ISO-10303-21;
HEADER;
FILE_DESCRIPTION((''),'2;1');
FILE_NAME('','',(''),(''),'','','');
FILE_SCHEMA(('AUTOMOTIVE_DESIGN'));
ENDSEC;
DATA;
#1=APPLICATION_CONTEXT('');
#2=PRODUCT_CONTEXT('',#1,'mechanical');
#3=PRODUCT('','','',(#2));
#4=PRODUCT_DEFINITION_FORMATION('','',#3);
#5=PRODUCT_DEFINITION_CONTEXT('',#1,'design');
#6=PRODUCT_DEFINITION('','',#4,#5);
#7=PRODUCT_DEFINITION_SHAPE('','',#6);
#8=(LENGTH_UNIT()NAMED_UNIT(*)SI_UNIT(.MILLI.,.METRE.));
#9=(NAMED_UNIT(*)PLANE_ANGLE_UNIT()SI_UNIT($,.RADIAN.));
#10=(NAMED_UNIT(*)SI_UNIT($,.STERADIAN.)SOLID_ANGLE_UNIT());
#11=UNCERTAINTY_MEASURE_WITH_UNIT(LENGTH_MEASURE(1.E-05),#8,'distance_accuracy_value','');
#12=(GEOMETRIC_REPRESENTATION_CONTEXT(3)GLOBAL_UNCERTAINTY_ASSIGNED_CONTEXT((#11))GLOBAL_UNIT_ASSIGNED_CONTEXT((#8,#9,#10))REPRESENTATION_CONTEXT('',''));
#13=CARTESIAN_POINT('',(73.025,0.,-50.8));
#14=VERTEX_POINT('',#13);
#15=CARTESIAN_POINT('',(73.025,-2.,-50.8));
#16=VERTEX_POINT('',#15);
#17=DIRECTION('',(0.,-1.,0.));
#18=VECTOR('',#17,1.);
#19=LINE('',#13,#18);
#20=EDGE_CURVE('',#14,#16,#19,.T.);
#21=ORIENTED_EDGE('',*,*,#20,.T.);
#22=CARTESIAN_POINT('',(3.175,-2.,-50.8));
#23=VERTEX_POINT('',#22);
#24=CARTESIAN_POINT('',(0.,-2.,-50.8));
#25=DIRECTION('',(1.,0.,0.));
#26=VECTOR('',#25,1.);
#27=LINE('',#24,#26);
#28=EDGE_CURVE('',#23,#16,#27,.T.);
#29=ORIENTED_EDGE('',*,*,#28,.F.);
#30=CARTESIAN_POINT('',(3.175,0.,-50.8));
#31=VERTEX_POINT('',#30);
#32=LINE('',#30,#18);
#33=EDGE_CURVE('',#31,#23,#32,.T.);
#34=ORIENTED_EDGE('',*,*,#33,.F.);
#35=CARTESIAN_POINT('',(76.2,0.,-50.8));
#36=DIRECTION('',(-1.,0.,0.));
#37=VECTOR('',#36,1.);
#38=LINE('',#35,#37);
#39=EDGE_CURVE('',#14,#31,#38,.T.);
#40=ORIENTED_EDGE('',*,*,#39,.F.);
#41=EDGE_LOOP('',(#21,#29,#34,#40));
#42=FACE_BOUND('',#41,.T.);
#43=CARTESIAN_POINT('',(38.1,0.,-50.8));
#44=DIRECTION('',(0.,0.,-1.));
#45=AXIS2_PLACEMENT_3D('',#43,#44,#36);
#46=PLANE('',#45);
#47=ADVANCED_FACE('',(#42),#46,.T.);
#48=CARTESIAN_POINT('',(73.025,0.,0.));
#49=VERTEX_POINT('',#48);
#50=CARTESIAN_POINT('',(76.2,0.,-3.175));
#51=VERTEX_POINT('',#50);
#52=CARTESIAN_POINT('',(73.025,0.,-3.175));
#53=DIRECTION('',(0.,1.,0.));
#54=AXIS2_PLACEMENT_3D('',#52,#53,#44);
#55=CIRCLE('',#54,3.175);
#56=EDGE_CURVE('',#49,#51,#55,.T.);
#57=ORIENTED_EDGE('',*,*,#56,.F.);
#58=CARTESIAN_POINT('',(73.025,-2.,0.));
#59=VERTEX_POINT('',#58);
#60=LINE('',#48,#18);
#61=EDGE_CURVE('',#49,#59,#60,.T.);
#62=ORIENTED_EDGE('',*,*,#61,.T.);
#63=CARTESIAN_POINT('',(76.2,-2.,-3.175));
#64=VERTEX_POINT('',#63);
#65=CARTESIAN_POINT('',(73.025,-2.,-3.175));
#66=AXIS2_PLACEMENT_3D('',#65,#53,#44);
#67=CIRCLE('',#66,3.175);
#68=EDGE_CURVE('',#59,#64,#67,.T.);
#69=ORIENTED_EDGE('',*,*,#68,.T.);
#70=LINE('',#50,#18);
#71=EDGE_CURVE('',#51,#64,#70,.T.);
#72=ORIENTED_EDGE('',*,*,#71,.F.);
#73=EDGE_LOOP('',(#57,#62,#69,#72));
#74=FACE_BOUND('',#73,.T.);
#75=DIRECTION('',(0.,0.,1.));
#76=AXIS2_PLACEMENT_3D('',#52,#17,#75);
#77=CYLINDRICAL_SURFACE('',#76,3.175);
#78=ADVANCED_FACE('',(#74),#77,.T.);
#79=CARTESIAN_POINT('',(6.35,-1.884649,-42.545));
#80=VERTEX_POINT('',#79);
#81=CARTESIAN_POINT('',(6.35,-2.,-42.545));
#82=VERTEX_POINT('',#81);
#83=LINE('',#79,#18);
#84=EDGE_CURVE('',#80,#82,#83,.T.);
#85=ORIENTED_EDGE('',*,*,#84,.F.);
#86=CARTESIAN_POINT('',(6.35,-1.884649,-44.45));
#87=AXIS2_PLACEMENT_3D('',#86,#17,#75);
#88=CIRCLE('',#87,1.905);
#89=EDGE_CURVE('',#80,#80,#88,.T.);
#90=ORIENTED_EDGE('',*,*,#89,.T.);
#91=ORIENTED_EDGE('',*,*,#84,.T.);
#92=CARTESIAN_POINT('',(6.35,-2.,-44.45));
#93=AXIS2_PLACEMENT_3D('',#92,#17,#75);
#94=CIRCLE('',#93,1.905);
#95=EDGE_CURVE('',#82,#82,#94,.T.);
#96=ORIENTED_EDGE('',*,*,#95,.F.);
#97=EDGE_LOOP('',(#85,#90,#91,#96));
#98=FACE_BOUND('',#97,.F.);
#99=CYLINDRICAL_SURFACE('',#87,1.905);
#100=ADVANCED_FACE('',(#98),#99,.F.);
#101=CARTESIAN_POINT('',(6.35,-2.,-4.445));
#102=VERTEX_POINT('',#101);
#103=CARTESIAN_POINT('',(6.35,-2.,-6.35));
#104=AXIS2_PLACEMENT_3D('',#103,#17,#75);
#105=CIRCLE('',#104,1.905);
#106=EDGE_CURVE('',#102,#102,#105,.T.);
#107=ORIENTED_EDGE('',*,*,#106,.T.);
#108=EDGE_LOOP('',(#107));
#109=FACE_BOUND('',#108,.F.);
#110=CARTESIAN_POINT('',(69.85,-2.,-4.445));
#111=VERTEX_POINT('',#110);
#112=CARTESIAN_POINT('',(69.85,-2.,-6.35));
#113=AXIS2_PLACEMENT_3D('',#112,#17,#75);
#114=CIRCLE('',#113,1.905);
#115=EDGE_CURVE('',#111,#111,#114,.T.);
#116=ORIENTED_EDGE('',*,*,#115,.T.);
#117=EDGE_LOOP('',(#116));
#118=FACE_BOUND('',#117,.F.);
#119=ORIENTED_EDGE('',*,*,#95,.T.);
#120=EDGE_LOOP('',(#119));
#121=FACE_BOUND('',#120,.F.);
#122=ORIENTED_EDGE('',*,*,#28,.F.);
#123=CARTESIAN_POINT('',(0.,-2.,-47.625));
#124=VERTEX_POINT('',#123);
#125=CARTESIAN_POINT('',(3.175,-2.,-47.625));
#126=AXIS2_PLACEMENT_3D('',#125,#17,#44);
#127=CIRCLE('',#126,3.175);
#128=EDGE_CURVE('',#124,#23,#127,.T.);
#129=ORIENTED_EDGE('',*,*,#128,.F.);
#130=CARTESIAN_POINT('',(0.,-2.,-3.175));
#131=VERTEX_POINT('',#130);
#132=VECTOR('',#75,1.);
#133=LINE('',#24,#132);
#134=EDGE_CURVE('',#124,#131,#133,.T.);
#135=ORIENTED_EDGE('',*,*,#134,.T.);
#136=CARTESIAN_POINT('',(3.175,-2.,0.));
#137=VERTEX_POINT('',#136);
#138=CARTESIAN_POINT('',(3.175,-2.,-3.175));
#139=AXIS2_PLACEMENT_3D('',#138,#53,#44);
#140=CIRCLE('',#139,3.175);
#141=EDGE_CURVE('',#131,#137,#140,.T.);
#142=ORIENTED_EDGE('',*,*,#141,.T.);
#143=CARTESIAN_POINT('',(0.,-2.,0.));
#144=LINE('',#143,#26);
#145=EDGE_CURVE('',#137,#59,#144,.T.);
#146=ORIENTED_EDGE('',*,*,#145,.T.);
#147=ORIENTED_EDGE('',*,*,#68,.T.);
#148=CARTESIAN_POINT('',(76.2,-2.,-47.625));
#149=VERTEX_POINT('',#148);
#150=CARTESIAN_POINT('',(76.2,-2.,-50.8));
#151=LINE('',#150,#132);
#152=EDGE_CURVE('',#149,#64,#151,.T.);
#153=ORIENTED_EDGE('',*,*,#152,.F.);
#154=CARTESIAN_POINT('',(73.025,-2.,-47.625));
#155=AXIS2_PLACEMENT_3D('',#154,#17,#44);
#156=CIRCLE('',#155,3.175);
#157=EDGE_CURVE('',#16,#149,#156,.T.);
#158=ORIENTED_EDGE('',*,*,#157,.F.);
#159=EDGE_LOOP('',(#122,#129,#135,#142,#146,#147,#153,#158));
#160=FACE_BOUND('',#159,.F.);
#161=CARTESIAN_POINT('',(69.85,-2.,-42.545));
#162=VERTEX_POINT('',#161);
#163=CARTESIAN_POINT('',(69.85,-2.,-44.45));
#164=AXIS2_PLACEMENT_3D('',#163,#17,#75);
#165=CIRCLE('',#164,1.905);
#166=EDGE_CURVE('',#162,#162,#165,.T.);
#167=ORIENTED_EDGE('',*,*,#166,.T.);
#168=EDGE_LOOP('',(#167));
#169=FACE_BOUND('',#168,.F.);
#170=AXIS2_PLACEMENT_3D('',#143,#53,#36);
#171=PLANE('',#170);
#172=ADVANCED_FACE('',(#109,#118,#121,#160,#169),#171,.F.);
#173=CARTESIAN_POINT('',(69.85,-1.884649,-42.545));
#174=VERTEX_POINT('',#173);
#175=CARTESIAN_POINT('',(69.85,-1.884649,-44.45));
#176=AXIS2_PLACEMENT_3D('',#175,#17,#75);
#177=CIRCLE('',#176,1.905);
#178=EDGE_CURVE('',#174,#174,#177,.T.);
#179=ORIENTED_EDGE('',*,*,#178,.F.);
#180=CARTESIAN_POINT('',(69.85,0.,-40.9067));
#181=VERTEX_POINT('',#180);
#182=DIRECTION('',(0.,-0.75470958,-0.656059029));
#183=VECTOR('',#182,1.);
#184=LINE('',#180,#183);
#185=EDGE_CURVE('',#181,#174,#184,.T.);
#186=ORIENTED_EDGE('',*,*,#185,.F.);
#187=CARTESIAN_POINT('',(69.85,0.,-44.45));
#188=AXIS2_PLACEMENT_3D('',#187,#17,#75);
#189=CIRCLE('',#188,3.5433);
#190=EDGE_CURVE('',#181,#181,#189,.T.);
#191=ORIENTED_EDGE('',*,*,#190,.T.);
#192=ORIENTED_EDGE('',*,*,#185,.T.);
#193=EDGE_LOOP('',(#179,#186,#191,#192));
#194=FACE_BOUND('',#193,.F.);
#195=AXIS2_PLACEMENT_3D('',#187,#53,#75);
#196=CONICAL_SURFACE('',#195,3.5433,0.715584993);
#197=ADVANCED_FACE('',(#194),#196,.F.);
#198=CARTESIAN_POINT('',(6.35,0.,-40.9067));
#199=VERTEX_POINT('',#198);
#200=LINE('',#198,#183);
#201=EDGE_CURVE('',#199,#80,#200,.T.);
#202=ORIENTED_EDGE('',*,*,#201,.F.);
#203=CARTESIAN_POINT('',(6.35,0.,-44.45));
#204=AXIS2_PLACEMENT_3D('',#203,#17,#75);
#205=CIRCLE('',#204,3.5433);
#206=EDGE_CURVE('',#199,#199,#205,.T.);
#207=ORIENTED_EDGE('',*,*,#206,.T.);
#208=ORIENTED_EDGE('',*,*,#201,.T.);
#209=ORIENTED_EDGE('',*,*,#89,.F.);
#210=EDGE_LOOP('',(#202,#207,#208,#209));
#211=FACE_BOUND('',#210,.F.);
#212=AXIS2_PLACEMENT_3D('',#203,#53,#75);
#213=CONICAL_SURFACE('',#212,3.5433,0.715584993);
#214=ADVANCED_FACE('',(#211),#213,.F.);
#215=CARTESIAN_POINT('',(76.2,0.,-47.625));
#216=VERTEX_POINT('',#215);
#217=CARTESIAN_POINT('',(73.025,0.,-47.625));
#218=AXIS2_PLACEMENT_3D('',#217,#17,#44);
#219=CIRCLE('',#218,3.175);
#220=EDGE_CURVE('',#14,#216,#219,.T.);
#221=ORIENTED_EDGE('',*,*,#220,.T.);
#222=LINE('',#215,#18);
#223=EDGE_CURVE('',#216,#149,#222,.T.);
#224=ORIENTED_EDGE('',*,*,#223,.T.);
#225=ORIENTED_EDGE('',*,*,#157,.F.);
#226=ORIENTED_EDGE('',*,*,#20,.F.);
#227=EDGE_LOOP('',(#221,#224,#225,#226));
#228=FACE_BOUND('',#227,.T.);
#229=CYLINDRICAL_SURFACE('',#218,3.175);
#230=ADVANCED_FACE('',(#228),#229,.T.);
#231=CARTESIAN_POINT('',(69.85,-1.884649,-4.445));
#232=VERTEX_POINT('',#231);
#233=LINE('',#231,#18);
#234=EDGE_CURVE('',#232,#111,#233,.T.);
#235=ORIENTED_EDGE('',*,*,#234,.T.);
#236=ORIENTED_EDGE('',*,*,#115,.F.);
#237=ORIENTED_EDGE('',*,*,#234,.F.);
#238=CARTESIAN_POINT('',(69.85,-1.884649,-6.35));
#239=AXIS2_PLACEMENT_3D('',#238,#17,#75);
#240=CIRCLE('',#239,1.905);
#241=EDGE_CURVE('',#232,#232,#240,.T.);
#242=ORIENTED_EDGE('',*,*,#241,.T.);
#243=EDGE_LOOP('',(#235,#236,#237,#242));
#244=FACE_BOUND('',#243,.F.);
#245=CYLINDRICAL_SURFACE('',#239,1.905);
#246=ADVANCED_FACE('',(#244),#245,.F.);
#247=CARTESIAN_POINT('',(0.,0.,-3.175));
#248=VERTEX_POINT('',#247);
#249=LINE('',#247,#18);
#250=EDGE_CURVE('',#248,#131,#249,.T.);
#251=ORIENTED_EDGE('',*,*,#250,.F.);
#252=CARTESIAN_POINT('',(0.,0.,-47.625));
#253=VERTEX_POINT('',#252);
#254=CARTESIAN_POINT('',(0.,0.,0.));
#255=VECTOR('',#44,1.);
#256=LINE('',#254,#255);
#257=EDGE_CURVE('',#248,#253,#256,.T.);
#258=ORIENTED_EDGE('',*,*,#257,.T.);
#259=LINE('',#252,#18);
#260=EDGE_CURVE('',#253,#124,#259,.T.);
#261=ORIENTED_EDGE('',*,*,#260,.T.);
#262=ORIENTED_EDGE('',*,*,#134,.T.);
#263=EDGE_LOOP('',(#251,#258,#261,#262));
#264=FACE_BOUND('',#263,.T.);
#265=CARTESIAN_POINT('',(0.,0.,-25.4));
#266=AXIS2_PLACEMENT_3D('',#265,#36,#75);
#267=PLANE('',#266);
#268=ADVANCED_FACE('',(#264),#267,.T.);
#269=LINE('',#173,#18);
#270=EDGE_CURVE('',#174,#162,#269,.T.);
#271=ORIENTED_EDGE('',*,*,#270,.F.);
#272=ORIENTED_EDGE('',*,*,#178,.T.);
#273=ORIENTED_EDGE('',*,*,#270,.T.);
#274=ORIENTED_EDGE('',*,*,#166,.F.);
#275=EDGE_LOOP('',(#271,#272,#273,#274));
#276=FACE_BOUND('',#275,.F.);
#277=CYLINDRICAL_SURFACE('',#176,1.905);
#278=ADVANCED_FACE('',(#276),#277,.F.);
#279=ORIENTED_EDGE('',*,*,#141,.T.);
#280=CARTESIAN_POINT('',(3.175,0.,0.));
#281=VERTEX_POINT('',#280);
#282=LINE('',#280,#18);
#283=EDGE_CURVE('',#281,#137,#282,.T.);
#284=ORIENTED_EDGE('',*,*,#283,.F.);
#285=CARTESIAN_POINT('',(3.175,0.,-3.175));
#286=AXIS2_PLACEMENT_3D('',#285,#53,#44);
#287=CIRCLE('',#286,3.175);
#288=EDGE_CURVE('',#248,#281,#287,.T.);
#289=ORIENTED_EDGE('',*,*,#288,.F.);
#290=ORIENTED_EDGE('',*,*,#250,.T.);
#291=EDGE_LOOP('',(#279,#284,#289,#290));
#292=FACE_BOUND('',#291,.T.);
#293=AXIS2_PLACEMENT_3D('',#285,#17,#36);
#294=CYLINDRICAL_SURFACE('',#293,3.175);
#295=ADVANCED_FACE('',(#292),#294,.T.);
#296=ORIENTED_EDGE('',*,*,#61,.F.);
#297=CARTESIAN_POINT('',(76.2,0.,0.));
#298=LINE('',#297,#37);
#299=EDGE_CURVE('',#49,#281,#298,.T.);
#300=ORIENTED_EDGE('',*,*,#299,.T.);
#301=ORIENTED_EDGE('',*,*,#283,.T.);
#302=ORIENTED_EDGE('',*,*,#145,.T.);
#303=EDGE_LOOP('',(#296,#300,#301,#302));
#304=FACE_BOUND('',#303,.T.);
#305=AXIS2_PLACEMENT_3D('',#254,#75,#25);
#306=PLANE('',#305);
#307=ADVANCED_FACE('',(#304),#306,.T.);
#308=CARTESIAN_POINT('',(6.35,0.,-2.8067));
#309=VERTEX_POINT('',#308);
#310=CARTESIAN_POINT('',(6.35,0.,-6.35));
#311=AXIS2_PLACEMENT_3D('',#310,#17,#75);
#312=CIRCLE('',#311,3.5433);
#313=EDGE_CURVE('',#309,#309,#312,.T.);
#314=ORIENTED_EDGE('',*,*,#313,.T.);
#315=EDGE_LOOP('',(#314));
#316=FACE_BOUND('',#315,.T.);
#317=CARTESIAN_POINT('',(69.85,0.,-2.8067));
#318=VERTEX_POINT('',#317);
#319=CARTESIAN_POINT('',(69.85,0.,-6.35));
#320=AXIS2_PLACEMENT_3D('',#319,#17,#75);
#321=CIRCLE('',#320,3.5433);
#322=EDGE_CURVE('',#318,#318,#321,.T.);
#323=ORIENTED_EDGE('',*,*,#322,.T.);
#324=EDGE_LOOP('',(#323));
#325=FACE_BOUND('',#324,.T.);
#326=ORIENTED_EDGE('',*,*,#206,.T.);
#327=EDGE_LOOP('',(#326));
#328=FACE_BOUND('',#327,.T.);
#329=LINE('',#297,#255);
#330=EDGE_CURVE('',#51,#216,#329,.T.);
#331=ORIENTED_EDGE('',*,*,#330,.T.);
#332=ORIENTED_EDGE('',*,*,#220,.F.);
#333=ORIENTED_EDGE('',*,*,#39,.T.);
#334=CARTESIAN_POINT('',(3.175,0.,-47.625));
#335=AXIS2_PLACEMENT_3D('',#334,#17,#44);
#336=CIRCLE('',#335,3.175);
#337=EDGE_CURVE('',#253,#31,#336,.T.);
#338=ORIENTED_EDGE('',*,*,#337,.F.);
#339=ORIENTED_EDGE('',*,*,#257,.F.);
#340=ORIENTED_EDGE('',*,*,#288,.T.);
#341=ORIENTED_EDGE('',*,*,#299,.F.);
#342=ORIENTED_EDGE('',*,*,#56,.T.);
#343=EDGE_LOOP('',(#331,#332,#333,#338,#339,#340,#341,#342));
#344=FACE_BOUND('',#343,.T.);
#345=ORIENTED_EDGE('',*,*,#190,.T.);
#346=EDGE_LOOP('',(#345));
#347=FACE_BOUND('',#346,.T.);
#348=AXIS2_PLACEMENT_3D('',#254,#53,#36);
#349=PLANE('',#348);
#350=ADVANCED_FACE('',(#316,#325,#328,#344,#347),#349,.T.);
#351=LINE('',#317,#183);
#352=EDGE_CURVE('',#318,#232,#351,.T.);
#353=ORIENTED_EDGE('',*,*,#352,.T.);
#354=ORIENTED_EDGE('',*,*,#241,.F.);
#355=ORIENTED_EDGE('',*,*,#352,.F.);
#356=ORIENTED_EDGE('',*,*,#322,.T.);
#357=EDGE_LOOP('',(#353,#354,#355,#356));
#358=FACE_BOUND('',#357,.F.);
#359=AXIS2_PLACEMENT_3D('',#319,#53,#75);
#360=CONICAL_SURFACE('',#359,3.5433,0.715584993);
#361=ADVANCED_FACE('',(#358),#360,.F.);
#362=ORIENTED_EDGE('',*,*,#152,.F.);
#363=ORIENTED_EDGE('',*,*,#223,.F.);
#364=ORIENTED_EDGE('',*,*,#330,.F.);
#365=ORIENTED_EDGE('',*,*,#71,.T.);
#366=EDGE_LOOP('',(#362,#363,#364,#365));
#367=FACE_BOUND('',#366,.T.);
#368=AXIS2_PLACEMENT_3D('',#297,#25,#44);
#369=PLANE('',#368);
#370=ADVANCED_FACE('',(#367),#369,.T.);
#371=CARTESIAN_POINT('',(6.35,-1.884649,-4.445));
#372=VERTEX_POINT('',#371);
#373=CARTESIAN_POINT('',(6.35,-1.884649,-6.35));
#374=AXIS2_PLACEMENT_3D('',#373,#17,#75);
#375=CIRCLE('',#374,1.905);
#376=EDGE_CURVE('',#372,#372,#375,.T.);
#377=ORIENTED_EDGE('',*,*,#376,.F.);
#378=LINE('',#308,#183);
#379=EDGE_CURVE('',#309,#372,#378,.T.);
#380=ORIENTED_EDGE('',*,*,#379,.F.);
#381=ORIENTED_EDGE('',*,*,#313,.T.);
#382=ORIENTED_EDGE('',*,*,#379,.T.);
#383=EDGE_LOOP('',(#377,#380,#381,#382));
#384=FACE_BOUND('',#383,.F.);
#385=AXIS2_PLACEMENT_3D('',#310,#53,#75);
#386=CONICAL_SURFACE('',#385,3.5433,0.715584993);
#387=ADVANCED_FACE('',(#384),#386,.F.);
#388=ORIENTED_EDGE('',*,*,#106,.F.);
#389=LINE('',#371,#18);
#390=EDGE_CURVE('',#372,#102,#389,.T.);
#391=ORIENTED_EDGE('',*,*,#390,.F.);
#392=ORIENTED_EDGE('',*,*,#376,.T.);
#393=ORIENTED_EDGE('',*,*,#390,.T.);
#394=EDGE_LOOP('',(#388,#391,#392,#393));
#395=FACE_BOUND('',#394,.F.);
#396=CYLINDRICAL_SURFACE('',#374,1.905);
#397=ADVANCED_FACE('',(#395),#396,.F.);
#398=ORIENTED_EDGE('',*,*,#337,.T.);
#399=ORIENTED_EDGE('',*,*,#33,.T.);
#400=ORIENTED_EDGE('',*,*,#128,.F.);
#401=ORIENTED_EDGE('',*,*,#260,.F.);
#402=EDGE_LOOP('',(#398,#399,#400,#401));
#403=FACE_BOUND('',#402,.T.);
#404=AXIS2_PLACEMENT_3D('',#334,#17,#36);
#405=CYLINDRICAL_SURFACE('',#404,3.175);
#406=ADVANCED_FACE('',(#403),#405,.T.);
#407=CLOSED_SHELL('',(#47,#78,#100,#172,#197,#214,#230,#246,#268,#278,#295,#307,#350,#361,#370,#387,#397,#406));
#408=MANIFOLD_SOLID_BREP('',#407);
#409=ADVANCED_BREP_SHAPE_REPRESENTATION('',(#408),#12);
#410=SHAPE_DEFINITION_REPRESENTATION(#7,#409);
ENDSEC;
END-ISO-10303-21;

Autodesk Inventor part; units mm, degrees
ref_plane "YZ Plane" through (0, 0, 0) normal (1, 0, 0) x (0, 1, 0)
ref_plane "XZ Plane" through (0, 0, 0) normal (0, 1, 0) x (-1, 0, 0)
ref_plane "XY Plane" through (0, 0, 0) normal (0, 0, 1) x (1, 0, 0)
sketch "Sketch1" plane through (0, 0, 0) normal (0, 1, 0) x (-1, 0, 0)
  line L0 (0, 0) -> (-76.2, 0)
  line L1 (-76.2, 0) -> (-76.2, -50.8)
  line L2 (-76.2, -50.8) -> (0, -50.8)
  line L3 (0, -50.8) -> (0, 0)
  line L4 (0, -25.4) -> (-76.2, -25.4)
  line L5 (-38.1, -50.8) -> (-38.1, 0)
  line L6 (-6.35, -44.45) -> (-69.85, -44.45) construction
  line L7 (-69.85, -44.45) -> (-69.85, -6.35) construction
  line L8 (-69.85, -6.35) -> (-6.35, -6.35) construction
  line L9 (-6.35, -6.35) -> (-6.35, -44.45) construction
  line L10 (-6.35, -44.45) -> (-69.85, -6.35) construction
  line L11 (-69.85, -44.45) -> (-6.35, -6.35) construction
  point P0 (-38.1, -25.4)
  dimension "d0" = 76.2
  dimension "d1" = 50.8
  dimension "d2" = 63.5
  dimension "d3" = 38.1
extrude "Plate1" add sketch "Sketch1" against normal blind 2
hole "Mounting Hole" at (6.35, 0, -44.45) direction (0, -1, 0) diameter 3.81 end through all countersink diameter 7.0866 countersink angle 82 clearance for "Flat Head Machine Screw (82)" size "#6" standard "Ansi Unified Screw Threads"
pattern_sketch "Mounting Holes" of "Mounting Hole" from (6.35, 0, -44.45) copies at (69.85, 0, -44.45) at (69.85, 0, -6.35) at (6.35, 0, -6.35)
fillet "Corner Round1" radius 3.175 4 edges at (0, -1, -50.8) (76.2, -1, -50.8) (76.2, -1, 0) (0, -1, 0)
sketch "Sketch2" plane through (0, 0, 0) normal (0, 1, 0) x (1, 0, 0)
  line L0 (5.9151, 38.1317) -> (36.83, 38.1317) construction
  line L1 (36.83, 38.1317) -> (36.83, 35.0837) construction
  line L2 (36.83, 35.0837) -> (5.9151, 35.0837) construction
  line L3 (5.9151, 35.0837) -> (5.9151, 38.1317) construction
  line L4 (5.9151, 31.2737) -> (36.83, 31.2737) construction
  line L5 (36.83, 31.2737) -> (36.83, 28.2258) construction
  line L6 (36.83, 28.2258) -> (5.9151, 28.2257) construction
  line L7 (5.9151, 28.2257) -> (5.9151, 31.2737) construction
  line L8 (11.7398, 18.288) -> (64.4602, 18.288) construction
  line L9 (64.4602, 18.288) -> (64.4602, 8.128) construction
  line L10 (64.4602, 8.128) -> (11.7398, 8.128) construction
  line L11 (11.7398, 8.128) -> (11.7398, 18.288) construction
  line L12 (21.6232, 5.588) -> (54.5768, 5.588) construction
  line L13 (54.5768, 5.588) -> (54.5768, 2.54) construction
  line L14 (54.5768, 2.54) -> (21.6232, 2.54) construction
  line L15 (21.6232, 2.54) -> (21.6232, 5.588) construction
  line L16 (5.9151, 24.4157) -> (36.83, 24.4157) construction
  line L17 (36.83, 24.4157) -> (36.83, 21.3677) construction
  line L18 (36.83, 21.3677) -> (5.9151, 21.3677) construction
  line L19 (5.9151, 21.3677) -> (5.9151, 24.4157) construction
  circle A0 centre (6.35, 6.35) radius 3.5433 construction
  circle A1 centre (69.85, 6.35) radius 3.5433 construction
  circle A2 centre (69.85, 44.45) radius 3.5433 construction
  circle A3 centre (6.35, 44.45) radius 3.5433 construction
  arc A4 (0, 3.175) -> (3.175, 0) centre (3.175, 3.175) ccw construction
  line L20 (3.175, 0) -> (73.025, 0) construction
  arc A5 (73.025, 0) -> (76.2, 3.175) centre (73.025, 3.175) ccw construction
  line L21 (76.2, 3.175) -> (76.2, 47.625) construction
  arc A6 (76.2, 47.625) -> (73.025, 50.8) centre (73.025, 47.625) ccw construction
  line L22 (73.025, 50.8) -> (3.175, 50.8) construction
  arc A7 (3.175, 50.8) -> (0, 47.625) centre (3.175, 47.625) ccw construction
  line L23 (0, 47.625) -> (0, 3.175) construction
  circle A8 centre (6.35, 44.45) radius 6.35 construction
  line L24 (73.025, 50.8) -> (3.175, 50.8) projected
  line L25 (38.1, 50.8) -> (38.1, 0) construction
  line L26 (0, 25.4) -> (76.2, 25.4) construction
  circle A9 centre (69.85, 44.45) radius 6.35 construction
  circle A10 centre (6.35, 6.35) radius 6.35 construction
  circle A11 centre (69.85, 6.35) radius 6.35 construction
  line L27 (39.37, 39.1478) -> (64.77, 39.1478)
  line L28 (64.77, 39.1478) -> (64.77, 34.0678)
  line L29 (64.77, 34.0678) -> (39.37, 34.0677)
  line L30 (39.37, 34.0677) -> (39.37, 39.1478)
  line L31 (39.37, 32.2897) -> (64.77, 32.2898)
  line L32 (64.77, 32.2898) -> (64.77, 27.2097)
  line L33 (64.77, 27.2097) -> (39.37, 27.2097)
  line L34 (39.37, 27.2097) -> (39.37, 32.2897)
  line L35 (39.37, 25.4317) -> (64.77, 25.4318)
  line L36 (64.77, 25.4318) -> (64.77, 20.3517)
  line L37 (64.77, 20.3517) -> (39.37, 20.3517)
  line L38 (39.37, 20.3517) -> (39.37, 25.4317)
  line L39 (13.2579, 48.26) -> (62.9421, 48.26) construction
  line L40 (62.9421, 48.26) -> (62.9421, 41.2115) construction
  line L41 (62.9421, 41.2115) -> (13.2579, 41.2115) construction
  line L42 (13.2579, 41.2115) -> (13.2579, 48.26) construction
  point P0 (38.1, 18.288)
  point P1 (38.1, 25.4)
  point P2 (38.1, 5.588)
  point P3 (38.1, 25.4)
  point P4 (39.37, 22.8917)
  point P5 (36.83, 22.8917)
  point P6 (39.37, 29.7497)
  point P7 (36.83, 29.7497)
  point P8 (39.37, 36.6077)
  point P9 (36.83, 36.6077)
  point P10 (38.1, 41.2115)
  dimension "d24" = 2.54
  dimension "d25" = 3.048
  dimension "d26" = 10.16
  dimension "d27" = 2.54
  dimension "d28" = 3.048
  dimension "d29" = 3.048
  dimension "d30" = 3.048
  dimension "d31" = 3.81
  dimension "d32" = 3.81
  dimension "d33" = 2.54
  dimension "d34" = 3.0798
  dimension "d35" = 2.54
  dimension "d36" = 25.4
  dimension "d37" = 5.08
  dimension "d38" = 7.0485
  dimension "d39" = 2.54
  dimension "d40" = 3.0798
mark "Mark1"
equation "\"d11\" = Thickness"
equation "\"d5\" = Thickness"
equation "\"largeTextHeight\" = 3.048"
equation "\"smallTextHeight\" = 2.54"
equation "\"Thickness\" = 2"
properties part number "Jack Plate" material "Aluminum 6061"
